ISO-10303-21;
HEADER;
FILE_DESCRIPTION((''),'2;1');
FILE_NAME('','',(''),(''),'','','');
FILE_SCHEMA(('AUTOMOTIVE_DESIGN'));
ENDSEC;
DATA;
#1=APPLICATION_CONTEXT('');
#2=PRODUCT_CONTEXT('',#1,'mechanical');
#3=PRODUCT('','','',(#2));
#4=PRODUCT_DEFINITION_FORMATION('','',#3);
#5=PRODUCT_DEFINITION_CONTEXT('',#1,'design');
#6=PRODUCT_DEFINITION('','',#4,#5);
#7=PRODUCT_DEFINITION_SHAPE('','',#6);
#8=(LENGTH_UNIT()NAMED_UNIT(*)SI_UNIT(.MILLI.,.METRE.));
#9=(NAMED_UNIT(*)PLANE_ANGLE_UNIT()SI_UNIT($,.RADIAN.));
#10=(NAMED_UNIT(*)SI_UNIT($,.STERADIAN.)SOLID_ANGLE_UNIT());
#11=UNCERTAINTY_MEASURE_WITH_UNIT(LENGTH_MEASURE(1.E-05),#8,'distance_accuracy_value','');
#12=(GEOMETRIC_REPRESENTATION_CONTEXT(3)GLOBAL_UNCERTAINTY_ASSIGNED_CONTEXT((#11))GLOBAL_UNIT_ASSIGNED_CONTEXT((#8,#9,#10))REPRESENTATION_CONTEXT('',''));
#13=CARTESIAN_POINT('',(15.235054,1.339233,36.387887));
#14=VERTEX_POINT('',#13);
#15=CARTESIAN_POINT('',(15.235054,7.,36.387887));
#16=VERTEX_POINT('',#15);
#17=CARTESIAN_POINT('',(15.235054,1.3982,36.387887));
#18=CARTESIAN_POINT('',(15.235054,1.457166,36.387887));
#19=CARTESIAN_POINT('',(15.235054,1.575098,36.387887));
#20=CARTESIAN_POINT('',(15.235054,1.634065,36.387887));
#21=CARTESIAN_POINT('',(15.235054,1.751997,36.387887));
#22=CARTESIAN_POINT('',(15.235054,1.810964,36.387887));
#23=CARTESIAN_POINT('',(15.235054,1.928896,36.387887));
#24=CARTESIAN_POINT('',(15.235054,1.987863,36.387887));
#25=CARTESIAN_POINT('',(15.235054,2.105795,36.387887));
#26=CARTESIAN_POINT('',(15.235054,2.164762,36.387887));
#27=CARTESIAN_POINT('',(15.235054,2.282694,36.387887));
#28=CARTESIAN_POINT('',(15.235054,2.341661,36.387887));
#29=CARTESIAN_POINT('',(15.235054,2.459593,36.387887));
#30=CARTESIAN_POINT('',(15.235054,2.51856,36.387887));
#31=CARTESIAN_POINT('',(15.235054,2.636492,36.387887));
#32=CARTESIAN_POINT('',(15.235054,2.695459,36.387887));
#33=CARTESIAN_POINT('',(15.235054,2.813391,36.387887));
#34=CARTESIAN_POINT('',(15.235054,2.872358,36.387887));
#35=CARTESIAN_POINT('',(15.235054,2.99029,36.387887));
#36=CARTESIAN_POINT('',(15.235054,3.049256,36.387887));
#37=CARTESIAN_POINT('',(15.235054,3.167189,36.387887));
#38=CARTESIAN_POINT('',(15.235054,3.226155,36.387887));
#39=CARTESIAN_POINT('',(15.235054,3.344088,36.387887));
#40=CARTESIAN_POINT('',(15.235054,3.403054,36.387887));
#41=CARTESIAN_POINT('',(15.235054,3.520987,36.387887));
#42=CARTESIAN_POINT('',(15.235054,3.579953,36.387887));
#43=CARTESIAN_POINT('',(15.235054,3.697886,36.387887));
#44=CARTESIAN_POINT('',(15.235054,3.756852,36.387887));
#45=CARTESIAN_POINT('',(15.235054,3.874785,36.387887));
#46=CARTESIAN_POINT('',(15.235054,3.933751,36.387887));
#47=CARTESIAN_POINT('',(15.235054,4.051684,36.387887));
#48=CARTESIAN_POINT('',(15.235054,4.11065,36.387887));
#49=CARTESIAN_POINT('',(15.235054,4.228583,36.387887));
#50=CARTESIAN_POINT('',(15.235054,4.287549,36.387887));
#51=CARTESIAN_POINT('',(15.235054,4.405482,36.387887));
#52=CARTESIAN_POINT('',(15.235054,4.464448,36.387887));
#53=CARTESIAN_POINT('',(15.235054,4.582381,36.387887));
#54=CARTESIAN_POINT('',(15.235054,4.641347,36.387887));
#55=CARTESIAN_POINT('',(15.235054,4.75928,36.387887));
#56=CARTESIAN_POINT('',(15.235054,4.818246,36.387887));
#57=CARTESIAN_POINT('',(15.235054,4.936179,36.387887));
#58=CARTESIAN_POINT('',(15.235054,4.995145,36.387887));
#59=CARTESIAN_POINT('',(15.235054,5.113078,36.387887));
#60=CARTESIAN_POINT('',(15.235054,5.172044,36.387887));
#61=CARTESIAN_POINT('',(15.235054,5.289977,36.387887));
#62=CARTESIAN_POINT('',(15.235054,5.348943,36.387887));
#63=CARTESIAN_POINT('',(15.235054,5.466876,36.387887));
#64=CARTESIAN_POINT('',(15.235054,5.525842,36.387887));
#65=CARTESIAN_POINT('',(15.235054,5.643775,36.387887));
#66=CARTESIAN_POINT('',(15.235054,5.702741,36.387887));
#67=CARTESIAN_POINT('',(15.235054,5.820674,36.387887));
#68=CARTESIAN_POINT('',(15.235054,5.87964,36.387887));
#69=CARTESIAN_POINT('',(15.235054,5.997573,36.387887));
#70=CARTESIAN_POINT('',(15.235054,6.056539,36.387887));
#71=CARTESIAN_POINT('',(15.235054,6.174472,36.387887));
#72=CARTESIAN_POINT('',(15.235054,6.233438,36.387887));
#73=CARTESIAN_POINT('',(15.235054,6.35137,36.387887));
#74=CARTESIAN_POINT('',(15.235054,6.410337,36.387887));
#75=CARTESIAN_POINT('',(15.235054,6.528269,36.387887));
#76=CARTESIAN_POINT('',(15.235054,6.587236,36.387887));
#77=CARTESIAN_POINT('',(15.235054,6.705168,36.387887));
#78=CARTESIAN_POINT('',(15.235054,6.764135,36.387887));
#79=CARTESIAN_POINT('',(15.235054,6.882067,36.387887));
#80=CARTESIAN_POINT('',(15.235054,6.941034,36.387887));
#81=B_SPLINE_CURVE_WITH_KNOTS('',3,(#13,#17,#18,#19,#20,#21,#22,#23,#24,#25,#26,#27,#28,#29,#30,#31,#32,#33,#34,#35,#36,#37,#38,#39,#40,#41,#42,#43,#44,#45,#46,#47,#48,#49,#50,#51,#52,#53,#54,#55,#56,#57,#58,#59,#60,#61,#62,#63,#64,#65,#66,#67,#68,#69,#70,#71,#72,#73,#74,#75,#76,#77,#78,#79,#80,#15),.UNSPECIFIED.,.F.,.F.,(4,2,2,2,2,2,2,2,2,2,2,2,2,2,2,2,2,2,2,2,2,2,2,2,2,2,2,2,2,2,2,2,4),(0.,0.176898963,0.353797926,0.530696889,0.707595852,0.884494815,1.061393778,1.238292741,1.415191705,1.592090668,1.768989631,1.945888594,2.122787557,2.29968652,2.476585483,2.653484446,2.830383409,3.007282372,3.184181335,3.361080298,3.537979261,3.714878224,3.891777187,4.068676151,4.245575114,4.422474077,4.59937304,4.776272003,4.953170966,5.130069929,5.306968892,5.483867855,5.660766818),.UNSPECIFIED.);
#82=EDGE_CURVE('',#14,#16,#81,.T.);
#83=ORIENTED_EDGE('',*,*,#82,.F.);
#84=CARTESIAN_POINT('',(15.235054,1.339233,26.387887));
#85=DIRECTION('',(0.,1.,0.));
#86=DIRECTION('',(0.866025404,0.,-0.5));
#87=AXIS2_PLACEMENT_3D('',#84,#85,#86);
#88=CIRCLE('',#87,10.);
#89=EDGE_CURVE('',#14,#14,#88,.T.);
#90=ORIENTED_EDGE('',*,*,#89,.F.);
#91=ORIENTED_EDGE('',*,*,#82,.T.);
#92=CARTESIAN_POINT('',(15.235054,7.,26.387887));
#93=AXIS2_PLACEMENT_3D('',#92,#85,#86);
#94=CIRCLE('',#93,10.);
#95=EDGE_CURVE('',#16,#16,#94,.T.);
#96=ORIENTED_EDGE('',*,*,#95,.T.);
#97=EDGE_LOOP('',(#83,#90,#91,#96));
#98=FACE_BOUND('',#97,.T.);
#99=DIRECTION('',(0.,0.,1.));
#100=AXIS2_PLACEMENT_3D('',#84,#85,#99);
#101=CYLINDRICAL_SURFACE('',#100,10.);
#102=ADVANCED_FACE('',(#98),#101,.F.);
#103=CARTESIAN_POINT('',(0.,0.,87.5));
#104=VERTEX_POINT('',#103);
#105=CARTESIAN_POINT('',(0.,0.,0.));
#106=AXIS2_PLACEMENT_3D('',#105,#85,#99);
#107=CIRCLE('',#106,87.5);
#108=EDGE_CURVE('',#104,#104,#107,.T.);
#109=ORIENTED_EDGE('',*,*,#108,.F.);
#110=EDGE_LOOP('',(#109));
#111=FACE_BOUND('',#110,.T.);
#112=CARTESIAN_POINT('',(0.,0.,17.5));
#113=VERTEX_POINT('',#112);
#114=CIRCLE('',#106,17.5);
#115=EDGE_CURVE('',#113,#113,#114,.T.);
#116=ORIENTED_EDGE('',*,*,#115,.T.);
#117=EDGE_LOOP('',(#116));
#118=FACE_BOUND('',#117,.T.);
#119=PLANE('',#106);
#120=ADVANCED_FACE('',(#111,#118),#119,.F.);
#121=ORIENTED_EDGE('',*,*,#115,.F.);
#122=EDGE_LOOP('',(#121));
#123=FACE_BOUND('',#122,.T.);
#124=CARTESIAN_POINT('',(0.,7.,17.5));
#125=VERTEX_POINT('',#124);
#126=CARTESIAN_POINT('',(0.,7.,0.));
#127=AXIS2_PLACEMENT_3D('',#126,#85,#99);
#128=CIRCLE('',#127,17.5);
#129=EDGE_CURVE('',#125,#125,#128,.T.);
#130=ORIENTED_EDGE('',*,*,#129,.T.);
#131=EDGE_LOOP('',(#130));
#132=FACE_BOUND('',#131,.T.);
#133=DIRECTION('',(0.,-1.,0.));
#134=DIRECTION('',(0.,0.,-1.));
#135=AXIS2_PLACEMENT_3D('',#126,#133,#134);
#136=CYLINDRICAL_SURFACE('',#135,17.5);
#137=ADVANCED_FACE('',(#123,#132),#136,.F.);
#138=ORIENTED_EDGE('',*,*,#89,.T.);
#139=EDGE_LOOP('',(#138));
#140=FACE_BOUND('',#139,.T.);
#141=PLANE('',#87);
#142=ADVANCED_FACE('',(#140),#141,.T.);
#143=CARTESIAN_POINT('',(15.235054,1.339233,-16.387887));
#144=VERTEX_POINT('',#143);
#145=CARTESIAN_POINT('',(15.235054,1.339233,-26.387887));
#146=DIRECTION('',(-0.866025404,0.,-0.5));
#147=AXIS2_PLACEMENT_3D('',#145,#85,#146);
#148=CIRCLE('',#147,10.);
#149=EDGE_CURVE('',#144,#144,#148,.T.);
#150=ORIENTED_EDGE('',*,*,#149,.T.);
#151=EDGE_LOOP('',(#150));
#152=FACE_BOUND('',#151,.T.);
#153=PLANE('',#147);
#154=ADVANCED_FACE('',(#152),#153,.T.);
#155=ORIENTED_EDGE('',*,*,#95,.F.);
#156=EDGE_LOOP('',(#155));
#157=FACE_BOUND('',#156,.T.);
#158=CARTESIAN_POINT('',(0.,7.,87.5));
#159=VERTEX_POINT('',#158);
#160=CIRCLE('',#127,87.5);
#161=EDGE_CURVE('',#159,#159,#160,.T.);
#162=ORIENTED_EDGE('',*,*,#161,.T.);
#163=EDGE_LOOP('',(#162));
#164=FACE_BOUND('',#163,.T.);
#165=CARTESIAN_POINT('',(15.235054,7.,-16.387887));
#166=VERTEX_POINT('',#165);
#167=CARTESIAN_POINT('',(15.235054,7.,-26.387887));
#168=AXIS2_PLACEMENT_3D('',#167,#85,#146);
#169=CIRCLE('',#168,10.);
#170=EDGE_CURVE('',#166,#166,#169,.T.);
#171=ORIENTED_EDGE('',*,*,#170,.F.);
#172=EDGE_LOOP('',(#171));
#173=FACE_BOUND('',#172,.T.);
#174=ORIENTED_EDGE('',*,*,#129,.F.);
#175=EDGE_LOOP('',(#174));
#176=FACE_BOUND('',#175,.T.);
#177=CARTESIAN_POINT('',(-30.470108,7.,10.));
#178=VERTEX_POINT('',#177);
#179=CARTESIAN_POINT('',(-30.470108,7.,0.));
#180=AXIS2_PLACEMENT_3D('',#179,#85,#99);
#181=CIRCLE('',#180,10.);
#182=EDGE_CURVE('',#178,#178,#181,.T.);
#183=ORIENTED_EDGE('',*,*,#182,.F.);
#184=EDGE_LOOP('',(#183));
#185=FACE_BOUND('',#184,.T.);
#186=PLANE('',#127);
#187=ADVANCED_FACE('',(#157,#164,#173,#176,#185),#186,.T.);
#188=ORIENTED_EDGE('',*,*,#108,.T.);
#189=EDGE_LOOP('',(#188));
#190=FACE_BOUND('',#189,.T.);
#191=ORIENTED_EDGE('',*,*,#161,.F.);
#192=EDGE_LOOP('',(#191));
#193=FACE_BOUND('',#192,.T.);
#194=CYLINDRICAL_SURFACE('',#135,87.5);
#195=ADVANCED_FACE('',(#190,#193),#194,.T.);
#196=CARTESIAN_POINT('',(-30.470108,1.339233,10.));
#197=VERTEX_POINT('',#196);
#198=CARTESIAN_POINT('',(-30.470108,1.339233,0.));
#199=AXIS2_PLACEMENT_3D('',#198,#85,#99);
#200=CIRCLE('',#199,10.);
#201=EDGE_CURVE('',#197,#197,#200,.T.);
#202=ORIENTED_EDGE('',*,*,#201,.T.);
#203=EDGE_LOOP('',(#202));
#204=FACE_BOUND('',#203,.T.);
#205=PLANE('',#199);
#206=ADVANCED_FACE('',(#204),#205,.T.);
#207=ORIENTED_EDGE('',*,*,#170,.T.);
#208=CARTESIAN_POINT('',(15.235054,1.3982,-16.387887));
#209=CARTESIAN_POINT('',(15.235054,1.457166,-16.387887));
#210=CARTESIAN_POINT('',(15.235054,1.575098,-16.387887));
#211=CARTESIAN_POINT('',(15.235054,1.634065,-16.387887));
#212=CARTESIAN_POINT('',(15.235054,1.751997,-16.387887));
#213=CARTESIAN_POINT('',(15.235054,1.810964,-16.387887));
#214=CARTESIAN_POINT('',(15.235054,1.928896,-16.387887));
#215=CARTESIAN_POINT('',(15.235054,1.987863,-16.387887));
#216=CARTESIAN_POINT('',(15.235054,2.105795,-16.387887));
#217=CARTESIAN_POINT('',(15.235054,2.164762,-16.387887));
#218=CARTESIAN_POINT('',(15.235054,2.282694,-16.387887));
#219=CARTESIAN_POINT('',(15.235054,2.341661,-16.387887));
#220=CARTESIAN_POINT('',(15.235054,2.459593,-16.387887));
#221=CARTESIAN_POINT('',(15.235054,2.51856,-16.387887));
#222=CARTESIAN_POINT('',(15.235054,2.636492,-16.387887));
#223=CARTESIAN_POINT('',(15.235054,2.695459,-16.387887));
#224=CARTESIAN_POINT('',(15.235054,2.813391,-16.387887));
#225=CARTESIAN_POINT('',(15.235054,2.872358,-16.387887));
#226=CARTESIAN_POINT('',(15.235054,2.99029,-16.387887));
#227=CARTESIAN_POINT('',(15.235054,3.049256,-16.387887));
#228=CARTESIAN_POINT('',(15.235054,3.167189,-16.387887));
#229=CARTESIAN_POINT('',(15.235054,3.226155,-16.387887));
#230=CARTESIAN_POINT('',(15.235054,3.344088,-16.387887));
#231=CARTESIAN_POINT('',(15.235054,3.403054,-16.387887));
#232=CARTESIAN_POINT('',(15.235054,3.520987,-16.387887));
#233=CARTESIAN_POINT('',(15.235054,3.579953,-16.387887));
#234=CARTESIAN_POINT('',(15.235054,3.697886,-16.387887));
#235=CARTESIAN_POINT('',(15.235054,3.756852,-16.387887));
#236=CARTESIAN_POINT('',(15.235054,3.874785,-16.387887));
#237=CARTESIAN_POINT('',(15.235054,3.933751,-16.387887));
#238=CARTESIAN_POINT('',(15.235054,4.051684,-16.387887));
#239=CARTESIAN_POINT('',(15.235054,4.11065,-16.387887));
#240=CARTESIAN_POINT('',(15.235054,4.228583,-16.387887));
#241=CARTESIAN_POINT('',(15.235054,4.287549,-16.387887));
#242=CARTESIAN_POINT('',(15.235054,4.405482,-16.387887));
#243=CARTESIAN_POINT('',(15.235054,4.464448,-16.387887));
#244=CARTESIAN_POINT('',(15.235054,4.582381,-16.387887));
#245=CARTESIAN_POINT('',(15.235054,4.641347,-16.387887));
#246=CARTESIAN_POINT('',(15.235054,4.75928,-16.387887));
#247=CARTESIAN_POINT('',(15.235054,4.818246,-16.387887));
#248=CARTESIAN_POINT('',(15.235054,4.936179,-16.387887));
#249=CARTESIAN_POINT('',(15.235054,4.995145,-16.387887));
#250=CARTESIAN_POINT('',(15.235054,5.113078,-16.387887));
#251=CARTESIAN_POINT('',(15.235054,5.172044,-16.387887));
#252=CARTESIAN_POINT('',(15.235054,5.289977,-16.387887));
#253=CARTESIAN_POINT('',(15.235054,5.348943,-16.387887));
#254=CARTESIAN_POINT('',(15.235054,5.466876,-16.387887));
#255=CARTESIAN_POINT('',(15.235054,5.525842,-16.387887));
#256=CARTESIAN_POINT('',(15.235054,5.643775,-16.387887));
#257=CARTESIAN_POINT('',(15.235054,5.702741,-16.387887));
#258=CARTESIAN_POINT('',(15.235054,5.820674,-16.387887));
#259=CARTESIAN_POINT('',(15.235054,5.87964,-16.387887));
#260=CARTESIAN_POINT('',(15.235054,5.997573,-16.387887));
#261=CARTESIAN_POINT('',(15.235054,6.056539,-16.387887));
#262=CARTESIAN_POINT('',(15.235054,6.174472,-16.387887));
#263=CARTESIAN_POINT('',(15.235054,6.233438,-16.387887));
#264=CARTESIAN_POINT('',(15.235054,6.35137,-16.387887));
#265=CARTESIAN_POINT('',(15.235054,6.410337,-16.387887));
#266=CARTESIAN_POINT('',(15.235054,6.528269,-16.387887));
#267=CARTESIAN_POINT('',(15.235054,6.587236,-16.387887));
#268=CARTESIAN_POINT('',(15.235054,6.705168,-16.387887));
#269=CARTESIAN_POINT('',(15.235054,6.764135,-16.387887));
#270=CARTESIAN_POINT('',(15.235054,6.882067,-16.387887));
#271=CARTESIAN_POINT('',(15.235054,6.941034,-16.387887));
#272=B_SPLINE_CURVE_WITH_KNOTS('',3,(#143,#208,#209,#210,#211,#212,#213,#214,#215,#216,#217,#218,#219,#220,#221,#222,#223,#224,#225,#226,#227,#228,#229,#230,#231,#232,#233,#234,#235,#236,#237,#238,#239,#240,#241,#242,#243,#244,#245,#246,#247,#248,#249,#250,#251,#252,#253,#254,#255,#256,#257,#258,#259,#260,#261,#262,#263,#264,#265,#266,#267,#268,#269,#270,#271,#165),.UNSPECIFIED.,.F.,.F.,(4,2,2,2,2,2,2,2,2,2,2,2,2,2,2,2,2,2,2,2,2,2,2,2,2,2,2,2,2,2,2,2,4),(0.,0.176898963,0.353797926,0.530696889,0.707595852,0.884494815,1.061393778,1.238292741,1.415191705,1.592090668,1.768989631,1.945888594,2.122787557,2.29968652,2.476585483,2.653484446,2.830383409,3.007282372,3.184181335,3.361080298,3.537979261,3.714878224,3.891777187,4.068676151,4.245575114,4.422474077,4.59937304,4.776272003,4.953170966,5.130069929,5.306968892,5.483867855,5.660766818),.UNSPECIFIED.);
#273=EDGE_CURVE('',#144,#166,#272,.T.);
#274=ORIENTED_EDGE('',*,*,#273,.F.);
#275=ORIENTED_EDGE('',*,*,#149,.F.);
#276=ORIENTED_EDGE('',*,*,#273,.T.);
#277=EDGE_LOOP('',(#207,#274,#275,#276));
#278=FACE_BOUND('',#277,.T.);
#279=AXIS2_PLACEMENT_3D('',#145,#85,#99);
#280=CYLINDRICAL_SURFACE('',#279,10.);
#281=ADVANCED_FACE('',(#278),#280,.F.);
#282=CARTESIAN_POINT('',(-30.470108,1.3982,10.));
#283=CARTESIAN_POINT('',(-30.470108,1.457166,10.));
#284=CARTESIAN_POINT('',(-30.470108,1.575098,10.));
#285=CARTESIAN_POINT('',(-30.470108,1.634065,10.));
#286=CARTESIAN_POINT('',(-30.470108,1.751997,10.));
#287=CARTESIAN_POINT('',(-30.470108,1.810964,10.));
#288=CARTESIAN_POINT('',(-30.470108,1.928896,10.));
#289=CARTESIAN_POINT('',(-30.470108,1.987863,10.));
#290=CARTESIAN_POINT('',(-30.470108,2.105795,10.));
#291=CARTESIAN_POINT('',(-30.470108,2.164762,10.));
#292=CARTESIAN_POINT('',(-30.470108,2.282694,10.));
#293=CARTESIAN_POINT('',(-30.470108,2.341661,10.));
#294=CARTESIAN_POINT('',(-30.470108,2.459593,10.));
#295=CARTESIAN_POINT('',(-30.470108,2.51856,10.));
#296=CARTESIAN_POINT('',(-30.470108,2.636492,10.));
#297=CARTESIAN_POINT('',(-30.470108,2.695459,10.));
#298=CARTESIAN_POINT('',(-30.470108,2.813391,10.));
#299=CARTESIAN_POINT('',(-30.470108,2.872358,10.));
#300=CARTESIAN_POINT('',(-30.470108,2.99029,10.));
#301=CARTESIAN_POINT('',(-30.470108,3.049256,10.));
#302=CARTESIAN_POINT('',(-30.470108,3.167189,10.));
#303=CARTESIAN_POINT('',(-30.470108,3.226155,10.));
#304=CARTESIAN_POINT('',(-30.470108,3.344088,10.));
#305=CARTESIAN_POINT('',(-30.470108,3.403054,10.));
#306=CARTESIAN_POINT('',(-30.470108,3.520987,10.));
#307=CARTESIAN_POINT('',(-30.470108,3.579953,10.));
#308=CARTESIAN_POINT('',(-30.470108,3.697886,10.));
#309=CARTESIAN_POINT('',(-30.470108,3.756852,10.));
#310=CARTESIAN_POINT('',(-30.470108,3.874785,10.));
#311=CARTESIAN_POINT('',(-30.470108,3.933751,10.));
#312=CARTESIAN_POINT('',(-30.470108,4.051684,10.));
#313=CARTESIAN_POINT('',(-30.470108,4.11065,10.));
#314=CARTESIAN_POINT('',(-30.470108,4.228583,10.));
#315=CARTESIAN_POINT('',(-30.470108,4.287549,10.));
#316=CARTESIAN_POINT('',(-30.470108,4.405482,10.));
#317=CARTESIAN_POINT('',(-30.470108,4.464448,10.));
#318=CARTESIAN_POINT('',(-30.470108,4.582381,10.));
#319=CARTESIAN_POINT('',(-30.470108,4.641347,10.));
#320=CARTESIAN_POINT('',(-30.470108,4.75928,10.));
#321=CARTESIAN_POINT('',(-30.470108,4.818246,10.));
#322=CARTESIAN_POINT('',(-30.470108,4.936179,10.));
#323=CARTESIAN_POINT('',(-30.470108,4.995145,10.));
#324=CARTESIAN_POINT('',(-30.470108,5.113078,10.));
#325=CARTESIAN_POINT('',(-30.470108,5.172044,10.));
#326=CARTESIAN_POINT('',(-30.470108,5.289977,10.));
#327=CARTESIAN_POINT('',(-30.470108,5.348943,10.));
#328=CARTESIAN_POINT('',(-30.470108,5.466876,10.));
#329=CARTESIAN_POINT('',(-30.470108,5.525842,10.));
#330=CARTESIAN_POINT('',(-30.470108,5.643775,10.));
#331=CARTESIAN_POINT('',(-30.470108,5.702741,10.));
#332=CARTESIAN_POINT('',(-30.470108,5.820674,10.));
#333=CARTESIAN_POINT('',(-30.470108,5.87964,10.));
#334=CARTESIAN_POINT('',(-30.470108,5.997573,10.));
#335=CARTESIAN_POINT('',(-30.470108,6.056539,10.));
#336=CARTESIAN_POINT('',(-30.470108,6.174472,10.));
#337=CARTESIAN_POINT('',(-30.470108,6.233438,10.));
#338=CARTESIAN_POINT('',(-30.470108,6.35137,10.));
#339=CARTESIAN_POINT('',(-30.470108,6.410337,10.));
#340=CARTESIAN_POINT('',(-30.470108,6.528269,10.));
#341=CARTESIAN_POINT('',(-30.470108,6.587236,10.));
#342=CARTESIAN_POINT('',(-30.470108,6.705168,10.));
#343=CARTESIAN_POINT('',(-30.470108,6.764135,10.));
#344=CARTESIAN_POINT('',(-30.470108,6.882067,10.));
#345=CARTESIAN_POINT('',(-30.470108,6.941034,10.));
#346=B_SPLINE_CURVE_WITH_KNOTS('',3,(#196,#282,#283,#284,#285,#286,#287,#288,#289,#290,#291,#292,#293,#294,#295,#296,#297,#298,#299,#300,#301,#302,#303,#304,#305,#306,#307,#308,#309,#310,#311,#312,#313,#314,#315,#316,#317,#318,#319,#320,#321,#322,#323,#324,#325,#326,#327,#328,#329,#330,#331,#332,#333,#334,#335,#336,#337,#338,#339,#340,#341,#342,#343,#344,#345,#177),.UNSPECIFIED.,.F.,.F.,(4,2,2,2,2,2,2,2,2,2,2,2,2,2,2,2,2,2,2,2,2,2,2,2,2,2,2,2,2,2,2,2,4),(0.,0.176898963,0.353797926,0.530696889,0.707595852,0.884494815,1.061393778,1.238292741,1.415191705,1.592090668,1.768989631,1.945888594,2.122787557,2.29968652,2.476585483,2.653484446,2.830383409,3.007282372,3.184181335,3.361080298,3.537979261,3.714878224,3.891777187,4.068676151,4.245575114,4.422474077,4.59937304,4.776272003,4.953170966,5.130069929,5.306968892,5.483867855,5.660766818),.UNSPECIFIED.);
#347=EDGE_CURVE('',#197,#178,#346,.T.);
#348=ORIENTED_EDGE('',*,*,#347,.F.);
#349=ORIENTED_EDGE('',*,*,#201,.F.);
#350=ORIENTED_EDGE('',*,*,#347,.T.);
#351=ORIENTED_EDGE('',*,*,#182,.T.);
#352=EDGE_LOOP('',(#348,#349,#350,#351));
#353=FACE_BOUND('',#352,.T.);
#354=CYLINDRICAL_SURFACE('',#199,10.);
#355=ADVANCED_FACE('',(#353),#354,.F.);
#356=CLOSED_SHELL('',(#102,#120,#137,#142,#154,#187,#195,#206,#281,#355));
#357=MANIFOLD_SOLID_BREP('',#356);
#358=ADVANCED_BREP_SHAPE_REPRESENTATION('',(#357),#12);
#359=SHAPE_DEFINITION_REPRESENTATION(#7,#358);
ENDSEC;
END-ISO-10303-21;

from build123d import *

# Parameters (mm, degrees)
SKETCH1_R           = 87.5
BOSS_EXTRUDE1_DEPTH = 7
SKETCH2_R           = 17.5
CUT_EXTRUDE1_DEPTH  = 124.941518467
SKETCH3_R           = 10
CUT_EXTRUDE2_DEPTH  = 5.660766818
CIRPATTERN1_COUNT   = 3


with BuildPart() as part:
    # Sketch1 → Boss-Extrude1 (new body)
    with BuildSketch(Plane(origin=(0, 0, 0), x_dir=(1, 0, 0), z_dir=(0, 1, 0))):
        Circle(SKETCH1_R)
    extrude(amount=BOSS_EXTRUDE1_DEPTH)

    # Sketch2 → Cut-Extrude1 (cut, through all)
    with BuildSketch(Plane(origin=(0, 0, 0), x_dir=(1, 0, 0), z_dir=(0, 1, 0))):
        Circle(SKETCH2_R)
    extrude(amount=CUT_EXTRUDE1_DEPTH, mode=Mode.SUBTRACT)

    # Sketch3 → Cut-Extrude2 (cut)
    with BuildSketch(Plane(origin=(0, 7, 0), x_dir=(1, 0, 0), z_dir=(0, 1, 0))):
        with Locations((-30.470107867, 0)):
            Circle(SKETCH3_R)
    cut_extrude2 = extrude(amount=-CUT_EXTRUDE2_DEPTH, mode=Mode.SUBTRACT)

    # CirPattern1: Cut-Extrude2 ×3 about axis
    cirpattern1_axis = Axis((0, 0, 0), (0, 1, 0))
    for i in range(1, CIRPATTERN1_COUNT):
        add(cut_extrude2.rotate(cirpattern1_axis, i * 360 / CIRPATTERN1_COUNT), mode=Mode.SUBTRACT)


solid = part.part
